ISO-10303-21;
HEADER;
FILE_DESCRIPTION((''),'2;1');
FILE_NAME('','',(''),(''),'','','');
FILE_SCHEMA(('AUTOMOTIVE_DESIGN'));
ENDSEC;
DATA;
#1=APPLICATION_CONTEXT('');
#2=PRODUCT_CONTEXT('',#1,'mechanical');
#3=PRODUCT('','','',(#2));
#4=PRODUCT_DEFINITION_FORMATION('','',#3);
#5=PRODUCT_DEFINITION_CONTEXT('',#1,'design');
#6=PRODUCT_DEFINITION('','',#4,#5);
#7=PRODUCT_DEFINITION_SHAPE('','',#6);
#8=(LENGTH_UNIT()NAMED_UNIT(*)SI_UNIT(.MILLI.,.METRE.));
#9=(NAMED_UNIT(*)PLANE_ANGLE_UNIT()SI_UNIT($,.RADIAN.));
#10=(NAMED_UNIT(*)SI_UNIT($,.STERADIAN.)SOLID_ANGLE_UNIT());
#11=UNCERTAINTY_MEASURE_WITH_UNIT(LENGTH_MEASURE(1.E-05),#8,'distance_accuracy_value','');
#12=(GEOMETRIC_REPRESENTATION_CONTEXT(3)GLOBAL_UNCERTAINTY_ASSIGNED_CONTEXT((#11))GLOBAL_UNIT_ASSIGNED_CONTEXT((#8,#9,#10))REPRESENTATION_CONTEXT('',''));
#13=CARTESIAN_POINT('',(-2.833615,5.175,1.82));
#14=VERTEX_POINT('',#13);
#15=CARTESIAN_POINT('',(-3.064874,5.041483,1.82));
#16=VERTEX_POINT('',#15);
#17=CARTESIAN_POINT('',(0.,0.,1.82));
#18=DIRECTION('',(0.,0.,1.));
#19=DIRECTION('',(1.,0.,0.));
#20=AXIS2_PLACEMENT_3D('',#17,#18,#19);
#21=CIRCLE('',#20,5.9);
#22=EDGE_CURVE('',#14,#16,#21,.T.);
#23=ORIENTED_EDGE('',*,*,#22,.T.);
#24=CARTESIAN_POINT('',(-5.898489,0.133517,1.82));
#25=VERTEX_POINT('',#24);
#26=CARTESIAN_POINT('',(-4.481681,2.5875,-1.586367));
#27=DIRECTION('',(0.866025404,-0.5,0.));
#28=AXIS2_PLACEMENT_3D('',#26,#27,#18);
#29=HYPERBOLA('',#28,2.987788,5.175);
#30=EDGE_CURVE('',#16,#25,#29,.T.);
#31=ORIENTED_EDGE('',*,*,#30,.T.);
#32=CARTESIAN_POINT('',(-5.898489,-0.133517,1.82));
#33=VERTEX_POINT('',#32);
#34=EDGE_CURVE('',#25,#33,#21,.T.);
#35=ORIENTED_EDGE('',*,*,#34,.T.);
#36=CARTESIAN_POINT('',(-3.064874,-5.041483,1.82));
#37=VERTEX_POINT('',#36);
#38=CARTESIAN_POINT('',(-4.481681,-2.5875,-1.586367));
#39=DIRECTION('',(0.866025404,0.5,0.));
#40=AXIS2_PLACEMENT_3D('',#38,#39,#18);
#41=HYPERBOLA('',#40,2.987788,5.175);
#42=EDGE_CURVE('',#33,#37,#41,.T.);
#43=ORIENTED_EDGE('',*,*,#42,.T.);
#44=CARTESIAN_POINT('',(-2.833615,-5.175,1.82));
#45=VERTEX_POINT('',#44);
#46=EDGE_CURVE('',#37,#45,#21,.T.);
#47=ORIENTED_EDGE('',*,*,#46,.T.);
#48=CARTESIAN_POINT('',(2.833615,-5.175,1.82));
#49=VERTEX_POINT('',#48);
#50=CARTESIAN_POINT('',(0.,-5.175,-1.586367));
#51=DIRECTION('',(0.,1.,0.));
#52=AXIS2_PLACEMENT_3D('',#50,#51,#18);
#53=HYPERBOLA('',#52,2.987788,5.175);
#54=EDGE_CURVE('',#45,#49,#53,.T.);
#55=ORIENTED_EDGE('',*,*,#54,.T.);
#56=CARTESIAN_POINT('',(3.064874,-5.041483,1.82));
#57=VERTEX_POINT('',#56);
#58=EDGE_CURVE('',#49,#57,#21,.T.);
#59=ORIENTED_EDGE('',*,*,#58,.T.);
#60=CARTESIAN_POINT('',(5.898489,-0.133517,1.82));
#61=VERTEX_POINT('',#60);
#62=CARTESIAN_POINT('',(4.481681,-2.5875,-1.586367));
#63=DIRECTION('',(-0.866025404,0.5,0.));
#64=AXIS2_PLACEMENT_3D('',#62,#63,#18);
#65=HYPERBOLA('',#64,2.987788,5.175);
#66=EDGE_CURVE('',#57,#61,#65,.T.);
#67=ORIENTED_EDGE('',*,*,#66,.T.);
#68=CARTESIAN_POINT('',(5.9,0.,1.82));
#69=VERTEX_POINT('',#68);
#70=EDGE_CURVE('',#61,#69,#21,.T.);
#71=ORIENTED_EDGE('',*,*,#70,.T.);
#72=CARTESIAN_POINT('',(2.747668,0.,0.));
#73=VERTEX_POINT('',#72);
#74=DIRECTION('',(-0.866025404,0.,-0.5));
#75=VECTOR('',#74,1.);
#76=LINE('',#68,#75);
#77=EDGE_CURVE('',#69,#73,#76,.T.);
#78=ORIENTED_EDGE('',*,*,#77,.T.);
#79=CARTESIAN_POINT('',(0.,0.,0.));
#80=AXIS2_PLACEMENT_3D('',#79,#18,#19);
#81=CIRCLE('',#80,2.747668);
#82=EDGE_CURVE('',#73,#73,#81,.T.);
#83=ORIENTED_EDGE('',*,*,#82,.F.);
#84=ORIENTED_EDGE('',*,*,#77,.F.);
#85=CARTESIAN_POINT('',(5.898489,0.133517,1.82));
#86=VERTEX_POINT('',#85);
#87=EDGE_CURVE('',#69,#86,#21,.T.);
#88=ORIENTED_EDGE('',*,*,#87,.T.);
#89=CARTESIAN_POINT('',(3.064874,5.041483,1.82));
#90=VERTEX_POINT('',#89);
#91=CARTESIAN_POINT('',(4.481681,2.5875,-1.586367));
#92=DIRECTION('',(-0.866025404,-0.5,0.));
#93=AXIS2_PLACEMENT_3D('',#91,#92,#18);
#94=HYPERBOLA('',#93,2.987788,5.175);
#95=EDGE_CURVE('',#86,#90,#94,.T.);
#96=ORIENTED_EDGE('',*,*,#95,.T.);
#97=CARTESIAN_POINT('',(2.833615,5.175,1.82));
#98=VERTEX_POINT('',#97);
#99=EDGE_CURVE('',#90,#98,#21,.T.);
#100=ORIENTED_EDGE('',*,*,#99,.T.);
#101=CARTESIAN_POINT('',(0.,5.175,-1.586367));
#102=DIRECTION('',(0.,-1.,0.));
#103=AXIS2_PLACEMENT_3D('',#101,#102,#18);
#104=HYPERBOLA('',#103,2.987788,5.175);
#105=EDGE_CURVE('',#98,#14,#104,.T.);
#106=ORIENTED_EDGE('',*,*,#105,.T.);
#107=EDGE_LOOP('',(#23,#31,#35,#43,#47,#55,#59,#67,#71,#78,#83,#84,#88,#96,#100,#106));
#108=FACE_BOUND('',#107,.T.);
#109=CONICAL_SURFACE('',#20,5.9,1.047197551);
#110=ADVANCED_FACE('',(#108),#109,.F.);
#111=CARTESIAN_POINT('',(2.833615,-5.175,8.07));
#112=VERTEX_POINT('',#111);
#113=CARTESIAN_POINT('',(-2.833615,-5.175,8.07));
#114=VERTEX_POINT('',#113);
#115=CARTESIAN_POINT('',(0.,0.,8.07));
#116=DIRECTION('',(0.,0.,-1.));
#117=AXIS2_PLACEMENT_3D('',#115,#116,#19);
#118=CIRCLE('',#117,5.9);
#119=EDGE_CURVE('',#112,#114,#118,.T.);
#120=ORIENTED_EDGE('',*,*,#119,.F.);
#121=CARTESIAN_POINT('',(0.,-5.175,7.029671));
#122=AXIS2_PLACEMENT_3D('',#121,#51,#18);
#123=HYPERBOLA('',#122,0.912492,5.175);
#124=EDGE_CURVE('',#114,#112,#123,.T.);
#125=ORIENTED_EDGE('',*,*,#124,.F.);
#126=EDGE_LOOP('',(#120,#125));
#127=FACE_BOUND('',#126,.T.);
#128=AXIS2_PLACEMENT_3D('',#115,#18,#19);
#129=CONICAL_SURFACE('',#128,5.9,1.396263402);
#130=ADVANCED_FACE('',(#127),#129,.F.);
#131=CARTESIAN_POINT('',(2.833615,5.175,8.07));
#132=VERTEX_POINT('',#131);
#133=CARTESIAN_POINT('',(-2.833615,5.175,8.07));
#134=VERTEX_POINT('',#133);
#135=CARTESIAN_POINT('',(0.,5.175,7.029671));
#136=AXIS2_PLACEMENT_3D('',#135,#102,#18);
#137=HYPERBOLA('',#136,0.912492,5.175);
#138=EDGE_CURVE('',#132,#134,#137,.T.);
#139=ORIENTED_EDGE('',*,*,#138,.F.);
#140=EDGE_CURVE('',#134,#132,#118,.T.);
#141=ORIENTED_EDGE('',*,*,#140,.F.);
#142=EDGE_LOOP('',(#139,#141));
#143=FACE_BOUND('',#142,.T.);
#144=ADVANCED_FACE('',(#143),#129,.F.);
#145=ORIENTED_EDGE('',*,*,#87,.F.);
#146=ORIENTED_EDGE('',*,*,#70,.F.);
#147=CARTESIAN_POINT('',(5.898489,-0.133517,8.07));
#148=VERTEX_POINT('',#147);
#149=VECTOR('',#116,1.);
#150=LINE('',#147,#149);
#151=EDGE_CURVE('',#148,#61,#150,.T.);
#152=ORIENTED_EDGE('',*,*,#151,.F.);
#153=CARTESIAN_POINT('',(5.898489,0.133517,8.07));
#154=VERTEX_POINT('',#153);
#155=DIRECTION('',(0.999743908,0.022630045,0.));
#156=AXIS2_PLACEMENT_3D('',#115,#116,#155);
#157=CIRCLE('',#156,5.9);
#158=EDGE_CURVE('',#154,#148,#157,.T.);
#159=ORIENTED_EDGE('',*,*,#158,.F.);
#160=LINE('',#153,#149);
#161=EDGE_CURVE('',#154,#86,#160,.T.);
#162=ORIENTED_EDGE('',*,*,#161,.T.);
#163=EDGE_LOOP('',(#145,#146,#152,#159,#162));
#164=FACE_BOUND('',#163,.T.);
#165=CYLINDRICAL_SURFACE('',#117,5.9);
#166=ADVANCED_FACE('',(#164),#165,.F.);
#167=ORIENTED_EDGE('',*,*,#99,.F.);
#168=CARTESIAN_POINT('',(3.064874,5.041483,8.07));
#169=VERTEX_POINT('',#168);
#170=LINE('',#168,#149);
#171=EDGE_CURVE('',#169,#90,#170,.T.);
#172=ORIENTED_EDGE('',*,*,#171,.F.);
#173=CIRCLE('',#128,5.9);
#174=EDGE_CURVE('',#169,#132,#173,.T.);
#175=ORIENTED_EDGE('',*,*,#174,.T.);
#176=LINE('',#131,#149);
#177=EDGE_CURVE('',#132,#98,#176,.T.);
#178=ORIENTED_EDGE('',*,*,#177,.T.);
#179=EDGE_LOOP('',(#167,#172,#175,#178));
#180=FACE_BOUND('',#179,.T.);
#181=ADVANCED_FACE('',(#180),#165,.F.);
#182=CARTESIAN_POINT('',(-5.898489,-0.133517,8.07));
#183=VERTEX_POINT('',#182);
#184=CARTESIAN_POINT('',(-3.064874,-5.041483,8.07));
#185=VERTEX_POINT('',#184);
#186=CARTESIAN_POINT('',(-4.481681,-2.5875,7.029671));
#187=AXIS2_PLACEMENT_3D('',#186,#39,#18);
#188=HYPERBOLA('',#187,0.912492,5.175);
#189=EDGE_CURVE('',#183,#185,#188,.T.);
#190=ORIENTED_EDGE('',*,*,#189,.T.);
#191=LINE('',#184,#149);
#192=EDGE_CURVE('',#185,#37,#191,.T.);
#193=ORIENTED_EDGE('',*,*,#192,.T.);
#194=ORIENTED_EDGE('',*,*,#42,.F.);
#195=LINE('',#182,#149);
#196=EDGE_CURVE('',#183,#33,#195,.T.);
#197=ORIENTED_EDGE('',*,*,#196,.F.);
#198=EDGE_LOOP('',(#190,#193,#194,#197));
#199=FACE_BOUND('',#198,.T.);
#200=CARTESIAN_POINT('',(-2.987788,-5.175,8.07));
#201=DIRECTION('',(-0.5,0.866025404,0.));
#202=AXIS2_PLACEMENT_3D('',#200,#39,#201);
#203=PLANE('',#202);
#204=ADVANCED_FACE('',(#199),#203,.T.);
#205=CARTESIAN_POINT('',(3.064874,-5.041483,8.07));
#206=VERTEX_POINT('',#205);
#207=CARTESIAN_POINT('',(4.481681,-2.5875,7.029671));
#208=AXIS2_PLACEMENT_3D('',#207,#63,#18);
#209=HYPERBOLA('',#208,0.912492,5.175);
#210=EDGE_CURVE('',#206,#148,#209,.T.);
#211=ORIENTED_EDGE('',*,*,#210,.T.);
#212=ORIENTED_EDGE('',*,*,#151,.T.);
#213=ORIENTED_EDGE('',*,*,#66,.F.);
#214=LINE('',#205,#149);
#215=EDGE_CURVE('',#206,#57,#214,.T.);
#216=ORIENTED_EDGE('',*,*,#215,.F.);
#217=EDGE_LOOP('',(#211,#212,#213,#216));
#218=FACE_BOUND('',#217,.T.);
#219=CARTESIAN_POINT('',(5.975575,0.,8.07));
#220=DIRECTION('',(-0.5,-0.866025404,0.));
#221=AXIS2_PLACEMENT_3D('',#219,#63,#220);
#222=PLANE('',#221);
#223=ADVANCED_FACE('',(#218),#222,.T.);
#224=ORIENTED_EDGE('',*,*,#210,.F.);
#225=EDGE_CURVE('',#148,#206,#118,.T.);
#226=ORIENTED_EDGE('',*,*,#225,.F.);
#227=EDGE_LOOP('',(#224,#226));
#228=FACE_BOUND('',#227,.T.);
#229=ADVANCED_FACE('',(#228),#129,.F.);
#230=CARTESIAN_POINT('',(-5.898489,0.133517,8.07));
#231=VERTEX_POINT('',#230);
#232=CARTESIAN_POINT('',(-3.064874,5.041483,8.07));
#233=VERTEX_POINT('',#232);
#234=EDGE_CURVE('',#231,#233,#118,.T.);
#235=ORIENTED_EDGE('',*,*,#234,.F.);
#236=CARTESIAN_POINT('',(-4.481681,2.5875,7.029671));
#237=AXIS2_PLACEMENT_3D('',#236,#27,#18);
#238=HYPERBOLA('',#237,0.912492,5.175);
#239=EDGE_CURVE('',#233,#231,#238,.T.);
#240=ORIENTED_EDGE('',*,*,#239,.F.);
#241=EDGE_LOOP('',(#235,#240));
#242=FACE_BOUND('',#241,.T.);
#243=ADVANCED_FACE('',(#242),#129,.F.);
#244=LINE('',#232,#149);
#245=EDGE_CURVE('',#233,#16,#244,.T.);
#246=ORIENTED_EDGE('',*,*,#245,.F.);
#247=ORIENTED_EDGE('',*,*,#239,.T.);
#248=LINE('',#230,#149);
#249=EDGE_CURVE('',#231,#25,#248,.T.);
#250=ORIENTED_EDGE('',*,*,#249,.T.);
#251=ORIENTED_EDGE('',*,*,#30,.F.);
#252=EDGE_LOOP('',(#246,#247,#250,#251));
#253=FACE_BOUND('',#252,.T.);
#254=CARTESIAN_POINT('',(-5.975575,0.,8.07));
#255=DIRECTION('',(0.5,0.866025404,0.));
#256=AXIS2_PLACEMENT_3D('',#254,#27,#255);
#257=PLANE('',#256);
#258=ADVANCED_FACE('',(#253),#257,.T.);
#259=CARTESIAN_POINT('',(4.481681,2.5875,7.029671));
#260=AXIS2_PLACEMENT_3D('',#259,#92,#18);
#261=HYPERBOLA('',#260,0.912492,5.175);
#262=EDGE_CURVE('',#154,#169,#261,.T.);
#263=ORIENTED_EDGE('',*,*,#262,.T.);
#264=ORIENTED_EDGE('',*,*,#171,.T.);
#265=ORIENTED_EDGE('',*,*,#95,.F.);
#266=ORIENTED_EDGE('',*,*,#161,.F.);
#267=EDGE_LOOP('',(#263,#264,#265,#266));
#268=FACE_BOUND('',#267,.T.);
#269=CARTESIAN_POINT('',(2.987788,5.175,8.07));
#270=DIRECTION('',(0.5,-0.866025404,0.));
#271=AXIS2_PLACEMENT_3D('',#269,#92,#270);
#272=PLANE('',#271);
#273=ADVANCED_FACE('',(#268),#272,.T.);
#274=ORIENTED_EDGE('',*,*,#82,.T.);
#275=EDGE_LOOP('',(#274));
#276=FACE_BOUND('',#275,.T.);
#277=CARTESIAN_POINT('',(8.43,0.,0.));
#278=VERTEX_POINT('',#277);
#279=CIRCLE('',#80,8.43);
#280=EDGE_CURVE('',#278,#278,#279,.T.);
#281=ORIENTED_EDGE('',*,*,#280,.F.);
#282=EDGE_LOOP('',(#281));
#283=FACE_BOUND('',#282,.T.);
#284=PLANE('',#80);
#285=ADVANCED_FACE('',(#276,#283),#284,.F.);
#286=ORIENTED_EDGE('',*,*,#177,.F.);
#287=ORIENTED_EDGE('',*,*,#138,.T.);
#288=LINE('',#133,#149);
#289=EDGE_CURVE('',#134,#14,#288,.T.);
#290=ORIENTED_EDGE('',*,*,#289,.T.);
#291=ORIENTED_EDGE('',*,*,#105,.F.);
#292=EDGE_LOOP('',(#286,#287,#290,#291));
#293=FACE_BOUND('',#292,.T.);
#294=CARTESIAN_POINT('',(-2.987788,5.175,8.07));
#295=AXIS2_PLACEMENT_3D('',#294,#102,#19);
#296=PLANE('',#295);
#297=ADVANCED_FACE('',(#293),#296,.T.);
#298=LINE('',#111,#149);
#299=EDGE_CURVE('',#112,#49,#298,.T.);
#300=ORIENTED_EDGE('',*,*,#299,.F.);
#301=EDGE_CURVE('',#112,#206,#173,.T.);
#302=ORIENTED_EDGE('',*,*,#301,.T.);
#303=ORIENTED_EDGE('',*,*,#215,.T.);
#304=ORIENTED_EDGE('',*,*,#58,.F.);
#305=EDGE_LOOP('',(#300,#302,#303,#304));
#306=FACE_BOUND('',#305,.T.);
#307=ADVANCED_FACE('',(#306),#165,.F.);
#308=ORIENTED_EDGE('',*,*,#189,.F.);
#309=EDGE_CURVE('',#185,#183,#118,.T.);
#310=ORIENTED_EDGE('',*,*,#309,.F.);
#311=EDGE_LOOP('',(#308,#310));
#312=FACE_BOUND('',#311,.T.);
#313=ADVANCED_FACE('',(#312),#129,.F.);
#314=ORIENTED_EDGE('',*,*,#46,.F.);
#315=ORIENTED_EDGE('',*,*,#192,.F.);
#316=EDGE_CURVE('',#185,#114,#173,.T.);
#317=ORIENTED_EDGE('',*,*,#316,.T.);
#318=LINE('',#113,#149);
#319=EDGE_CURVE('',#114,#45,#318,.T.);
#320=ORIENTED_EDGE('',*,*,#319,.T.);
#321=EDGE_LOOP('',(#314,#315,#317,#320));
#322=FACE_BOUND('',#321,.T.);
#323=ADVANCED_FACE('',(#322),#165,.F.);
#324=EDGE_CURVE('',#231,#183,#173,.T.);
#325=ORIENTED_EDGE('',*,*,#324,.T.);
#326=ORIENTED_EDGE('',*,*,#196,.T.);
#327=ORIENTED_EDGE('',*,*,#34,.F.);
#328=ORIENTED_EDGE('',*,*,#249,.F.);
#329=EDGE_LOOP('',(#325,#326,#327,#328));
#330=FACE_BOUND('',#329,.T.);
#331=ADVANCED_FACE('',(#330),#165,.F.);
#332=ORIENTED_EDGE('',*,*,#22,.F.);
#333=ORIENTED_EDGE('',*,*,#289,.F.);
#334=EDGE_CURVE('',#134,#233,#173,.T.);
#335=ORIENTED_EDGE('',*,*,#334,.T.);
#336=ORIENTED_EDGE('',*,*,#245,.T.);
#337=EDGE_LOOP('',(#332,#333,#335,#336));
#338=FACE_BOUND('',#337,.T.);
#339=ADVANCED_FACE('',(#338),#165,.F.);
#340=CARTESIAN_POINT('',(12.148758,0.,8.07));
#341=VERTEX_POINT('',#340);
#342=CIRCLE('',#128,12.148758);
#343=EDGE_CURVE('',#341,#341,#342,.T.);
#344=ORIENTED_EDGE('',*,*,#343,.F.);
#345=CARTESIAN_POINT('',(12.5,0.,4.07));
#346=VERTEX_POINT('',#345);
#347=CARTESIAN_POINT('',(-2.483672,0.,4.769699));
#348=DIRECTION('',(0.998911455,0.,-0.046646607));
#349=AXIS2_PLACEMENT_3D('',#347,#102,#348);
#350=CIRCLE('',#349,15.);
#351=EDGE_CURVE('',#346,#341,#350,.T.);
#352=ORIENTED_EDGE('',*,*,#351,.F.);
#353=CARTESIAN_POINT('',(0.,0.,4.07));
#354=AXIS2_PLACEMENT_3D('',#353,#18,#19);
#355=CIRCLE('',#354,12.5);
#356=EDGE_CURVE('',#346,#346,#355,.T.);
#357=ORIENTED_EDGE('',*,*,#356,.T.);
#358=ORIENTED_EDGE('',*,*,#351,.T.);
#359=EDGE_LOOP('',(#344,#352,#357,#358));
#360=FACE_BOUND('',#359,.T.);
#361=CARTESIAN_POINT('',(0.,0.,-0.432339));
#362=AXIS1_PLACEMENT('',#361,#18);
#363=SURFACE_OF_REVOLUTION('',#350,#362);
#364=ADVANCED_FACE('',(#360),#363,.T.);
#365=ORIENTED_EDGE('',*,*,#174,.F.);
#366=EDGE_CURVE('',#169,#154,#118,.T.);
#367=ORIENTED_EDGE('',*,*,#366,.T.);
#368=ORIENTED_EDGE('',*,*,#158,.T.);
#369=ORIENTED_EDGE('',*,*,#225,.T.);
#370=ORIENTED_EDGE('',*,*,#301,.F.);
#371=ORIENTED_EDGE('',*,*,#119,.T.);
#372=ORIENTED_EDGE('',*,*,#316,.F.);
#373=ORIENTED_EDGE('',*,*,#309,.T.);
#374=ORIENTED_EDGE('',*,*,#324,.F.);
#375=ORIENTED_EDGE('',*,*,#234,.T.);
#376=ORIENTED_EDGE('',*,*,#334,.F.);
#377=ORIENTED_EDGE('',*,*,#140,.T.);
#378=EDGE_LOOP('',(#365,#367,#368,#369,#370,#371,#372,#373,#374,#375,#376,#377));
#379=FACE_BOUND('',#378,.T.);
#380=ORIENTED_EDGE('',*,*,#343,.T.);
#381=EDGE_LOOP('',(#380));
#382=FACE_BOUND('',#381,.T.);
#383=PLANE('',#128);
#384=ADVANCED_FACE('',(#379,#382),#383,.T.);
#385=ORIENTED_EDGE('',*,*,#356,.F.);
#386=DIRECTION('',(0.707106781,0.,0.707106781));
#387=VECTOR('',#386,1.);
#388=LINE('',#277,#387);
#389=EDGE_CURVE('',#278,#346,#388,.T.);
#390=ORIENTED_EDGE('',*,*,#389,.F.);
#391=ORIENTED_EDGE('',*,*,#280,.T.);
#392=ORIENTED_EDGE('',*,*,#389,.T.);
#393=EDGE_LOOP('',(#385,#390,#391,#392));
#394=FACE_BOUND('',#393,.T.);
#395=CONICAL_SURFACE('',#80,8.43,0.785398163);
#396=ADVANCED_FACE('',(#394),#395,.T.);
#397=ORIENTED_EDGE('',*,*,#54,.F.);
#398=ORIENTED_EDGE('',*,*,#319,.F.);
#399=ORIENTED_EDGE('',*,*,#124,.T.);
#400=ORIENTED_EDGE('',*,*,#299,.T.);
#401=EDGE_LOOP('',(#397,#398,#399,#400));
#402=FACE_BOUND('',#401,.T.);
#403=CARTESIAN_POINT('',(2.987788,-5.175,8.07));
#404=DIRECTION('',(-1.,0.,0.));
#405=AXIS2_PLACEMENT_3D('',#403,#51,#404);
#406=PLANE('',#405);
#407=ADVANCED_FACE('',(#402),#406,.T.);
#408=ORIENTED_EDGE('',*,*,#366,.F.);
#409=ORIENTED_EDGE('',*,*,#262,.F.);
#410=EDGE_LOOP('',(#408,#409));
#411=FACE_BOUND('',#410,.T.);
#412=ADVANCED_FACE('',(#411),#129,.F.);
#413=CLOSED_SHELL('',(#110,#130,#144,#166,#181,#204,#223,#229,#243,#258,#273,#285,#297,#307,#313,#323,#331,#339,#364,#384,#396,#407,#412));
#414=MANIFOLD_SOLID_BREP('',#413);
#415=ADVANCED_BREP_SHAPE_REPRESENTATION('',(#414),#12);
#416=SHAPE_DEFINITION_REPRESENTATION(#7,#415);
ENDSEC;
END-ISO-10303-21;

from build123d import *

# Parameters (mm, degrees)
F2_R     = 6.7823339415
F3_DEPTH = 8.07
F4_R     = 5.9
F5_DEPTH = 1
F5_TAPER = 80


# Not quite as in the source:
# - an extrude ends at something that could not be found from the text; its depth is read off the source's solid


with BuildPart() as f1:
    # F0 (on Front) → F1 (revolve)
    with BuildSketch(Plane.XZ):
        with BuildLine():
            Line((12.1487583965, 8.07), (5.9, 8.07))
            Line((5.9, 8.07), (5.9, 1.82))
            Line((5.9, 1.82), (2.7476675302, 0))
            Line((2.7476675302, 0), (8.43, 0))
            Line((8.43, 0), (12.5, 4.07))
            ThreePointArc((12.5, 4.07), (12.4588304791, 6.0818062209), (12.1487583965, 8.07))
        make_face()
    revolve(axis=Axis((0, 0, -0.4323393759), (0, 0, 1)))

    # F2 (on face) → F3 (join, through all)
    with BuildSketch(Plane.XY.offset(8.07)):
        Circle(F2_R)
        Polygon((-5.9755752861, 0), (-2.9877876431, 5.175), (2.9877876431, 5.175), (5.9755752861, 0), (2.9877876431, -5.175), (-2.9877876431, -5.175), align=None, mode=Mode.SUBTRACT)
    extrude(amount=-F3_DEPTH)

    # F4 (on face) → F5 (cut)
    with BuildSketch(Plane.XY.offset(8.07)):
        Circle(F4_R)
    extrude(amount=-F5_DEPTH, taper=F5_TAPER, mode=Mode.SUBTRACT)


solid = f1.part
